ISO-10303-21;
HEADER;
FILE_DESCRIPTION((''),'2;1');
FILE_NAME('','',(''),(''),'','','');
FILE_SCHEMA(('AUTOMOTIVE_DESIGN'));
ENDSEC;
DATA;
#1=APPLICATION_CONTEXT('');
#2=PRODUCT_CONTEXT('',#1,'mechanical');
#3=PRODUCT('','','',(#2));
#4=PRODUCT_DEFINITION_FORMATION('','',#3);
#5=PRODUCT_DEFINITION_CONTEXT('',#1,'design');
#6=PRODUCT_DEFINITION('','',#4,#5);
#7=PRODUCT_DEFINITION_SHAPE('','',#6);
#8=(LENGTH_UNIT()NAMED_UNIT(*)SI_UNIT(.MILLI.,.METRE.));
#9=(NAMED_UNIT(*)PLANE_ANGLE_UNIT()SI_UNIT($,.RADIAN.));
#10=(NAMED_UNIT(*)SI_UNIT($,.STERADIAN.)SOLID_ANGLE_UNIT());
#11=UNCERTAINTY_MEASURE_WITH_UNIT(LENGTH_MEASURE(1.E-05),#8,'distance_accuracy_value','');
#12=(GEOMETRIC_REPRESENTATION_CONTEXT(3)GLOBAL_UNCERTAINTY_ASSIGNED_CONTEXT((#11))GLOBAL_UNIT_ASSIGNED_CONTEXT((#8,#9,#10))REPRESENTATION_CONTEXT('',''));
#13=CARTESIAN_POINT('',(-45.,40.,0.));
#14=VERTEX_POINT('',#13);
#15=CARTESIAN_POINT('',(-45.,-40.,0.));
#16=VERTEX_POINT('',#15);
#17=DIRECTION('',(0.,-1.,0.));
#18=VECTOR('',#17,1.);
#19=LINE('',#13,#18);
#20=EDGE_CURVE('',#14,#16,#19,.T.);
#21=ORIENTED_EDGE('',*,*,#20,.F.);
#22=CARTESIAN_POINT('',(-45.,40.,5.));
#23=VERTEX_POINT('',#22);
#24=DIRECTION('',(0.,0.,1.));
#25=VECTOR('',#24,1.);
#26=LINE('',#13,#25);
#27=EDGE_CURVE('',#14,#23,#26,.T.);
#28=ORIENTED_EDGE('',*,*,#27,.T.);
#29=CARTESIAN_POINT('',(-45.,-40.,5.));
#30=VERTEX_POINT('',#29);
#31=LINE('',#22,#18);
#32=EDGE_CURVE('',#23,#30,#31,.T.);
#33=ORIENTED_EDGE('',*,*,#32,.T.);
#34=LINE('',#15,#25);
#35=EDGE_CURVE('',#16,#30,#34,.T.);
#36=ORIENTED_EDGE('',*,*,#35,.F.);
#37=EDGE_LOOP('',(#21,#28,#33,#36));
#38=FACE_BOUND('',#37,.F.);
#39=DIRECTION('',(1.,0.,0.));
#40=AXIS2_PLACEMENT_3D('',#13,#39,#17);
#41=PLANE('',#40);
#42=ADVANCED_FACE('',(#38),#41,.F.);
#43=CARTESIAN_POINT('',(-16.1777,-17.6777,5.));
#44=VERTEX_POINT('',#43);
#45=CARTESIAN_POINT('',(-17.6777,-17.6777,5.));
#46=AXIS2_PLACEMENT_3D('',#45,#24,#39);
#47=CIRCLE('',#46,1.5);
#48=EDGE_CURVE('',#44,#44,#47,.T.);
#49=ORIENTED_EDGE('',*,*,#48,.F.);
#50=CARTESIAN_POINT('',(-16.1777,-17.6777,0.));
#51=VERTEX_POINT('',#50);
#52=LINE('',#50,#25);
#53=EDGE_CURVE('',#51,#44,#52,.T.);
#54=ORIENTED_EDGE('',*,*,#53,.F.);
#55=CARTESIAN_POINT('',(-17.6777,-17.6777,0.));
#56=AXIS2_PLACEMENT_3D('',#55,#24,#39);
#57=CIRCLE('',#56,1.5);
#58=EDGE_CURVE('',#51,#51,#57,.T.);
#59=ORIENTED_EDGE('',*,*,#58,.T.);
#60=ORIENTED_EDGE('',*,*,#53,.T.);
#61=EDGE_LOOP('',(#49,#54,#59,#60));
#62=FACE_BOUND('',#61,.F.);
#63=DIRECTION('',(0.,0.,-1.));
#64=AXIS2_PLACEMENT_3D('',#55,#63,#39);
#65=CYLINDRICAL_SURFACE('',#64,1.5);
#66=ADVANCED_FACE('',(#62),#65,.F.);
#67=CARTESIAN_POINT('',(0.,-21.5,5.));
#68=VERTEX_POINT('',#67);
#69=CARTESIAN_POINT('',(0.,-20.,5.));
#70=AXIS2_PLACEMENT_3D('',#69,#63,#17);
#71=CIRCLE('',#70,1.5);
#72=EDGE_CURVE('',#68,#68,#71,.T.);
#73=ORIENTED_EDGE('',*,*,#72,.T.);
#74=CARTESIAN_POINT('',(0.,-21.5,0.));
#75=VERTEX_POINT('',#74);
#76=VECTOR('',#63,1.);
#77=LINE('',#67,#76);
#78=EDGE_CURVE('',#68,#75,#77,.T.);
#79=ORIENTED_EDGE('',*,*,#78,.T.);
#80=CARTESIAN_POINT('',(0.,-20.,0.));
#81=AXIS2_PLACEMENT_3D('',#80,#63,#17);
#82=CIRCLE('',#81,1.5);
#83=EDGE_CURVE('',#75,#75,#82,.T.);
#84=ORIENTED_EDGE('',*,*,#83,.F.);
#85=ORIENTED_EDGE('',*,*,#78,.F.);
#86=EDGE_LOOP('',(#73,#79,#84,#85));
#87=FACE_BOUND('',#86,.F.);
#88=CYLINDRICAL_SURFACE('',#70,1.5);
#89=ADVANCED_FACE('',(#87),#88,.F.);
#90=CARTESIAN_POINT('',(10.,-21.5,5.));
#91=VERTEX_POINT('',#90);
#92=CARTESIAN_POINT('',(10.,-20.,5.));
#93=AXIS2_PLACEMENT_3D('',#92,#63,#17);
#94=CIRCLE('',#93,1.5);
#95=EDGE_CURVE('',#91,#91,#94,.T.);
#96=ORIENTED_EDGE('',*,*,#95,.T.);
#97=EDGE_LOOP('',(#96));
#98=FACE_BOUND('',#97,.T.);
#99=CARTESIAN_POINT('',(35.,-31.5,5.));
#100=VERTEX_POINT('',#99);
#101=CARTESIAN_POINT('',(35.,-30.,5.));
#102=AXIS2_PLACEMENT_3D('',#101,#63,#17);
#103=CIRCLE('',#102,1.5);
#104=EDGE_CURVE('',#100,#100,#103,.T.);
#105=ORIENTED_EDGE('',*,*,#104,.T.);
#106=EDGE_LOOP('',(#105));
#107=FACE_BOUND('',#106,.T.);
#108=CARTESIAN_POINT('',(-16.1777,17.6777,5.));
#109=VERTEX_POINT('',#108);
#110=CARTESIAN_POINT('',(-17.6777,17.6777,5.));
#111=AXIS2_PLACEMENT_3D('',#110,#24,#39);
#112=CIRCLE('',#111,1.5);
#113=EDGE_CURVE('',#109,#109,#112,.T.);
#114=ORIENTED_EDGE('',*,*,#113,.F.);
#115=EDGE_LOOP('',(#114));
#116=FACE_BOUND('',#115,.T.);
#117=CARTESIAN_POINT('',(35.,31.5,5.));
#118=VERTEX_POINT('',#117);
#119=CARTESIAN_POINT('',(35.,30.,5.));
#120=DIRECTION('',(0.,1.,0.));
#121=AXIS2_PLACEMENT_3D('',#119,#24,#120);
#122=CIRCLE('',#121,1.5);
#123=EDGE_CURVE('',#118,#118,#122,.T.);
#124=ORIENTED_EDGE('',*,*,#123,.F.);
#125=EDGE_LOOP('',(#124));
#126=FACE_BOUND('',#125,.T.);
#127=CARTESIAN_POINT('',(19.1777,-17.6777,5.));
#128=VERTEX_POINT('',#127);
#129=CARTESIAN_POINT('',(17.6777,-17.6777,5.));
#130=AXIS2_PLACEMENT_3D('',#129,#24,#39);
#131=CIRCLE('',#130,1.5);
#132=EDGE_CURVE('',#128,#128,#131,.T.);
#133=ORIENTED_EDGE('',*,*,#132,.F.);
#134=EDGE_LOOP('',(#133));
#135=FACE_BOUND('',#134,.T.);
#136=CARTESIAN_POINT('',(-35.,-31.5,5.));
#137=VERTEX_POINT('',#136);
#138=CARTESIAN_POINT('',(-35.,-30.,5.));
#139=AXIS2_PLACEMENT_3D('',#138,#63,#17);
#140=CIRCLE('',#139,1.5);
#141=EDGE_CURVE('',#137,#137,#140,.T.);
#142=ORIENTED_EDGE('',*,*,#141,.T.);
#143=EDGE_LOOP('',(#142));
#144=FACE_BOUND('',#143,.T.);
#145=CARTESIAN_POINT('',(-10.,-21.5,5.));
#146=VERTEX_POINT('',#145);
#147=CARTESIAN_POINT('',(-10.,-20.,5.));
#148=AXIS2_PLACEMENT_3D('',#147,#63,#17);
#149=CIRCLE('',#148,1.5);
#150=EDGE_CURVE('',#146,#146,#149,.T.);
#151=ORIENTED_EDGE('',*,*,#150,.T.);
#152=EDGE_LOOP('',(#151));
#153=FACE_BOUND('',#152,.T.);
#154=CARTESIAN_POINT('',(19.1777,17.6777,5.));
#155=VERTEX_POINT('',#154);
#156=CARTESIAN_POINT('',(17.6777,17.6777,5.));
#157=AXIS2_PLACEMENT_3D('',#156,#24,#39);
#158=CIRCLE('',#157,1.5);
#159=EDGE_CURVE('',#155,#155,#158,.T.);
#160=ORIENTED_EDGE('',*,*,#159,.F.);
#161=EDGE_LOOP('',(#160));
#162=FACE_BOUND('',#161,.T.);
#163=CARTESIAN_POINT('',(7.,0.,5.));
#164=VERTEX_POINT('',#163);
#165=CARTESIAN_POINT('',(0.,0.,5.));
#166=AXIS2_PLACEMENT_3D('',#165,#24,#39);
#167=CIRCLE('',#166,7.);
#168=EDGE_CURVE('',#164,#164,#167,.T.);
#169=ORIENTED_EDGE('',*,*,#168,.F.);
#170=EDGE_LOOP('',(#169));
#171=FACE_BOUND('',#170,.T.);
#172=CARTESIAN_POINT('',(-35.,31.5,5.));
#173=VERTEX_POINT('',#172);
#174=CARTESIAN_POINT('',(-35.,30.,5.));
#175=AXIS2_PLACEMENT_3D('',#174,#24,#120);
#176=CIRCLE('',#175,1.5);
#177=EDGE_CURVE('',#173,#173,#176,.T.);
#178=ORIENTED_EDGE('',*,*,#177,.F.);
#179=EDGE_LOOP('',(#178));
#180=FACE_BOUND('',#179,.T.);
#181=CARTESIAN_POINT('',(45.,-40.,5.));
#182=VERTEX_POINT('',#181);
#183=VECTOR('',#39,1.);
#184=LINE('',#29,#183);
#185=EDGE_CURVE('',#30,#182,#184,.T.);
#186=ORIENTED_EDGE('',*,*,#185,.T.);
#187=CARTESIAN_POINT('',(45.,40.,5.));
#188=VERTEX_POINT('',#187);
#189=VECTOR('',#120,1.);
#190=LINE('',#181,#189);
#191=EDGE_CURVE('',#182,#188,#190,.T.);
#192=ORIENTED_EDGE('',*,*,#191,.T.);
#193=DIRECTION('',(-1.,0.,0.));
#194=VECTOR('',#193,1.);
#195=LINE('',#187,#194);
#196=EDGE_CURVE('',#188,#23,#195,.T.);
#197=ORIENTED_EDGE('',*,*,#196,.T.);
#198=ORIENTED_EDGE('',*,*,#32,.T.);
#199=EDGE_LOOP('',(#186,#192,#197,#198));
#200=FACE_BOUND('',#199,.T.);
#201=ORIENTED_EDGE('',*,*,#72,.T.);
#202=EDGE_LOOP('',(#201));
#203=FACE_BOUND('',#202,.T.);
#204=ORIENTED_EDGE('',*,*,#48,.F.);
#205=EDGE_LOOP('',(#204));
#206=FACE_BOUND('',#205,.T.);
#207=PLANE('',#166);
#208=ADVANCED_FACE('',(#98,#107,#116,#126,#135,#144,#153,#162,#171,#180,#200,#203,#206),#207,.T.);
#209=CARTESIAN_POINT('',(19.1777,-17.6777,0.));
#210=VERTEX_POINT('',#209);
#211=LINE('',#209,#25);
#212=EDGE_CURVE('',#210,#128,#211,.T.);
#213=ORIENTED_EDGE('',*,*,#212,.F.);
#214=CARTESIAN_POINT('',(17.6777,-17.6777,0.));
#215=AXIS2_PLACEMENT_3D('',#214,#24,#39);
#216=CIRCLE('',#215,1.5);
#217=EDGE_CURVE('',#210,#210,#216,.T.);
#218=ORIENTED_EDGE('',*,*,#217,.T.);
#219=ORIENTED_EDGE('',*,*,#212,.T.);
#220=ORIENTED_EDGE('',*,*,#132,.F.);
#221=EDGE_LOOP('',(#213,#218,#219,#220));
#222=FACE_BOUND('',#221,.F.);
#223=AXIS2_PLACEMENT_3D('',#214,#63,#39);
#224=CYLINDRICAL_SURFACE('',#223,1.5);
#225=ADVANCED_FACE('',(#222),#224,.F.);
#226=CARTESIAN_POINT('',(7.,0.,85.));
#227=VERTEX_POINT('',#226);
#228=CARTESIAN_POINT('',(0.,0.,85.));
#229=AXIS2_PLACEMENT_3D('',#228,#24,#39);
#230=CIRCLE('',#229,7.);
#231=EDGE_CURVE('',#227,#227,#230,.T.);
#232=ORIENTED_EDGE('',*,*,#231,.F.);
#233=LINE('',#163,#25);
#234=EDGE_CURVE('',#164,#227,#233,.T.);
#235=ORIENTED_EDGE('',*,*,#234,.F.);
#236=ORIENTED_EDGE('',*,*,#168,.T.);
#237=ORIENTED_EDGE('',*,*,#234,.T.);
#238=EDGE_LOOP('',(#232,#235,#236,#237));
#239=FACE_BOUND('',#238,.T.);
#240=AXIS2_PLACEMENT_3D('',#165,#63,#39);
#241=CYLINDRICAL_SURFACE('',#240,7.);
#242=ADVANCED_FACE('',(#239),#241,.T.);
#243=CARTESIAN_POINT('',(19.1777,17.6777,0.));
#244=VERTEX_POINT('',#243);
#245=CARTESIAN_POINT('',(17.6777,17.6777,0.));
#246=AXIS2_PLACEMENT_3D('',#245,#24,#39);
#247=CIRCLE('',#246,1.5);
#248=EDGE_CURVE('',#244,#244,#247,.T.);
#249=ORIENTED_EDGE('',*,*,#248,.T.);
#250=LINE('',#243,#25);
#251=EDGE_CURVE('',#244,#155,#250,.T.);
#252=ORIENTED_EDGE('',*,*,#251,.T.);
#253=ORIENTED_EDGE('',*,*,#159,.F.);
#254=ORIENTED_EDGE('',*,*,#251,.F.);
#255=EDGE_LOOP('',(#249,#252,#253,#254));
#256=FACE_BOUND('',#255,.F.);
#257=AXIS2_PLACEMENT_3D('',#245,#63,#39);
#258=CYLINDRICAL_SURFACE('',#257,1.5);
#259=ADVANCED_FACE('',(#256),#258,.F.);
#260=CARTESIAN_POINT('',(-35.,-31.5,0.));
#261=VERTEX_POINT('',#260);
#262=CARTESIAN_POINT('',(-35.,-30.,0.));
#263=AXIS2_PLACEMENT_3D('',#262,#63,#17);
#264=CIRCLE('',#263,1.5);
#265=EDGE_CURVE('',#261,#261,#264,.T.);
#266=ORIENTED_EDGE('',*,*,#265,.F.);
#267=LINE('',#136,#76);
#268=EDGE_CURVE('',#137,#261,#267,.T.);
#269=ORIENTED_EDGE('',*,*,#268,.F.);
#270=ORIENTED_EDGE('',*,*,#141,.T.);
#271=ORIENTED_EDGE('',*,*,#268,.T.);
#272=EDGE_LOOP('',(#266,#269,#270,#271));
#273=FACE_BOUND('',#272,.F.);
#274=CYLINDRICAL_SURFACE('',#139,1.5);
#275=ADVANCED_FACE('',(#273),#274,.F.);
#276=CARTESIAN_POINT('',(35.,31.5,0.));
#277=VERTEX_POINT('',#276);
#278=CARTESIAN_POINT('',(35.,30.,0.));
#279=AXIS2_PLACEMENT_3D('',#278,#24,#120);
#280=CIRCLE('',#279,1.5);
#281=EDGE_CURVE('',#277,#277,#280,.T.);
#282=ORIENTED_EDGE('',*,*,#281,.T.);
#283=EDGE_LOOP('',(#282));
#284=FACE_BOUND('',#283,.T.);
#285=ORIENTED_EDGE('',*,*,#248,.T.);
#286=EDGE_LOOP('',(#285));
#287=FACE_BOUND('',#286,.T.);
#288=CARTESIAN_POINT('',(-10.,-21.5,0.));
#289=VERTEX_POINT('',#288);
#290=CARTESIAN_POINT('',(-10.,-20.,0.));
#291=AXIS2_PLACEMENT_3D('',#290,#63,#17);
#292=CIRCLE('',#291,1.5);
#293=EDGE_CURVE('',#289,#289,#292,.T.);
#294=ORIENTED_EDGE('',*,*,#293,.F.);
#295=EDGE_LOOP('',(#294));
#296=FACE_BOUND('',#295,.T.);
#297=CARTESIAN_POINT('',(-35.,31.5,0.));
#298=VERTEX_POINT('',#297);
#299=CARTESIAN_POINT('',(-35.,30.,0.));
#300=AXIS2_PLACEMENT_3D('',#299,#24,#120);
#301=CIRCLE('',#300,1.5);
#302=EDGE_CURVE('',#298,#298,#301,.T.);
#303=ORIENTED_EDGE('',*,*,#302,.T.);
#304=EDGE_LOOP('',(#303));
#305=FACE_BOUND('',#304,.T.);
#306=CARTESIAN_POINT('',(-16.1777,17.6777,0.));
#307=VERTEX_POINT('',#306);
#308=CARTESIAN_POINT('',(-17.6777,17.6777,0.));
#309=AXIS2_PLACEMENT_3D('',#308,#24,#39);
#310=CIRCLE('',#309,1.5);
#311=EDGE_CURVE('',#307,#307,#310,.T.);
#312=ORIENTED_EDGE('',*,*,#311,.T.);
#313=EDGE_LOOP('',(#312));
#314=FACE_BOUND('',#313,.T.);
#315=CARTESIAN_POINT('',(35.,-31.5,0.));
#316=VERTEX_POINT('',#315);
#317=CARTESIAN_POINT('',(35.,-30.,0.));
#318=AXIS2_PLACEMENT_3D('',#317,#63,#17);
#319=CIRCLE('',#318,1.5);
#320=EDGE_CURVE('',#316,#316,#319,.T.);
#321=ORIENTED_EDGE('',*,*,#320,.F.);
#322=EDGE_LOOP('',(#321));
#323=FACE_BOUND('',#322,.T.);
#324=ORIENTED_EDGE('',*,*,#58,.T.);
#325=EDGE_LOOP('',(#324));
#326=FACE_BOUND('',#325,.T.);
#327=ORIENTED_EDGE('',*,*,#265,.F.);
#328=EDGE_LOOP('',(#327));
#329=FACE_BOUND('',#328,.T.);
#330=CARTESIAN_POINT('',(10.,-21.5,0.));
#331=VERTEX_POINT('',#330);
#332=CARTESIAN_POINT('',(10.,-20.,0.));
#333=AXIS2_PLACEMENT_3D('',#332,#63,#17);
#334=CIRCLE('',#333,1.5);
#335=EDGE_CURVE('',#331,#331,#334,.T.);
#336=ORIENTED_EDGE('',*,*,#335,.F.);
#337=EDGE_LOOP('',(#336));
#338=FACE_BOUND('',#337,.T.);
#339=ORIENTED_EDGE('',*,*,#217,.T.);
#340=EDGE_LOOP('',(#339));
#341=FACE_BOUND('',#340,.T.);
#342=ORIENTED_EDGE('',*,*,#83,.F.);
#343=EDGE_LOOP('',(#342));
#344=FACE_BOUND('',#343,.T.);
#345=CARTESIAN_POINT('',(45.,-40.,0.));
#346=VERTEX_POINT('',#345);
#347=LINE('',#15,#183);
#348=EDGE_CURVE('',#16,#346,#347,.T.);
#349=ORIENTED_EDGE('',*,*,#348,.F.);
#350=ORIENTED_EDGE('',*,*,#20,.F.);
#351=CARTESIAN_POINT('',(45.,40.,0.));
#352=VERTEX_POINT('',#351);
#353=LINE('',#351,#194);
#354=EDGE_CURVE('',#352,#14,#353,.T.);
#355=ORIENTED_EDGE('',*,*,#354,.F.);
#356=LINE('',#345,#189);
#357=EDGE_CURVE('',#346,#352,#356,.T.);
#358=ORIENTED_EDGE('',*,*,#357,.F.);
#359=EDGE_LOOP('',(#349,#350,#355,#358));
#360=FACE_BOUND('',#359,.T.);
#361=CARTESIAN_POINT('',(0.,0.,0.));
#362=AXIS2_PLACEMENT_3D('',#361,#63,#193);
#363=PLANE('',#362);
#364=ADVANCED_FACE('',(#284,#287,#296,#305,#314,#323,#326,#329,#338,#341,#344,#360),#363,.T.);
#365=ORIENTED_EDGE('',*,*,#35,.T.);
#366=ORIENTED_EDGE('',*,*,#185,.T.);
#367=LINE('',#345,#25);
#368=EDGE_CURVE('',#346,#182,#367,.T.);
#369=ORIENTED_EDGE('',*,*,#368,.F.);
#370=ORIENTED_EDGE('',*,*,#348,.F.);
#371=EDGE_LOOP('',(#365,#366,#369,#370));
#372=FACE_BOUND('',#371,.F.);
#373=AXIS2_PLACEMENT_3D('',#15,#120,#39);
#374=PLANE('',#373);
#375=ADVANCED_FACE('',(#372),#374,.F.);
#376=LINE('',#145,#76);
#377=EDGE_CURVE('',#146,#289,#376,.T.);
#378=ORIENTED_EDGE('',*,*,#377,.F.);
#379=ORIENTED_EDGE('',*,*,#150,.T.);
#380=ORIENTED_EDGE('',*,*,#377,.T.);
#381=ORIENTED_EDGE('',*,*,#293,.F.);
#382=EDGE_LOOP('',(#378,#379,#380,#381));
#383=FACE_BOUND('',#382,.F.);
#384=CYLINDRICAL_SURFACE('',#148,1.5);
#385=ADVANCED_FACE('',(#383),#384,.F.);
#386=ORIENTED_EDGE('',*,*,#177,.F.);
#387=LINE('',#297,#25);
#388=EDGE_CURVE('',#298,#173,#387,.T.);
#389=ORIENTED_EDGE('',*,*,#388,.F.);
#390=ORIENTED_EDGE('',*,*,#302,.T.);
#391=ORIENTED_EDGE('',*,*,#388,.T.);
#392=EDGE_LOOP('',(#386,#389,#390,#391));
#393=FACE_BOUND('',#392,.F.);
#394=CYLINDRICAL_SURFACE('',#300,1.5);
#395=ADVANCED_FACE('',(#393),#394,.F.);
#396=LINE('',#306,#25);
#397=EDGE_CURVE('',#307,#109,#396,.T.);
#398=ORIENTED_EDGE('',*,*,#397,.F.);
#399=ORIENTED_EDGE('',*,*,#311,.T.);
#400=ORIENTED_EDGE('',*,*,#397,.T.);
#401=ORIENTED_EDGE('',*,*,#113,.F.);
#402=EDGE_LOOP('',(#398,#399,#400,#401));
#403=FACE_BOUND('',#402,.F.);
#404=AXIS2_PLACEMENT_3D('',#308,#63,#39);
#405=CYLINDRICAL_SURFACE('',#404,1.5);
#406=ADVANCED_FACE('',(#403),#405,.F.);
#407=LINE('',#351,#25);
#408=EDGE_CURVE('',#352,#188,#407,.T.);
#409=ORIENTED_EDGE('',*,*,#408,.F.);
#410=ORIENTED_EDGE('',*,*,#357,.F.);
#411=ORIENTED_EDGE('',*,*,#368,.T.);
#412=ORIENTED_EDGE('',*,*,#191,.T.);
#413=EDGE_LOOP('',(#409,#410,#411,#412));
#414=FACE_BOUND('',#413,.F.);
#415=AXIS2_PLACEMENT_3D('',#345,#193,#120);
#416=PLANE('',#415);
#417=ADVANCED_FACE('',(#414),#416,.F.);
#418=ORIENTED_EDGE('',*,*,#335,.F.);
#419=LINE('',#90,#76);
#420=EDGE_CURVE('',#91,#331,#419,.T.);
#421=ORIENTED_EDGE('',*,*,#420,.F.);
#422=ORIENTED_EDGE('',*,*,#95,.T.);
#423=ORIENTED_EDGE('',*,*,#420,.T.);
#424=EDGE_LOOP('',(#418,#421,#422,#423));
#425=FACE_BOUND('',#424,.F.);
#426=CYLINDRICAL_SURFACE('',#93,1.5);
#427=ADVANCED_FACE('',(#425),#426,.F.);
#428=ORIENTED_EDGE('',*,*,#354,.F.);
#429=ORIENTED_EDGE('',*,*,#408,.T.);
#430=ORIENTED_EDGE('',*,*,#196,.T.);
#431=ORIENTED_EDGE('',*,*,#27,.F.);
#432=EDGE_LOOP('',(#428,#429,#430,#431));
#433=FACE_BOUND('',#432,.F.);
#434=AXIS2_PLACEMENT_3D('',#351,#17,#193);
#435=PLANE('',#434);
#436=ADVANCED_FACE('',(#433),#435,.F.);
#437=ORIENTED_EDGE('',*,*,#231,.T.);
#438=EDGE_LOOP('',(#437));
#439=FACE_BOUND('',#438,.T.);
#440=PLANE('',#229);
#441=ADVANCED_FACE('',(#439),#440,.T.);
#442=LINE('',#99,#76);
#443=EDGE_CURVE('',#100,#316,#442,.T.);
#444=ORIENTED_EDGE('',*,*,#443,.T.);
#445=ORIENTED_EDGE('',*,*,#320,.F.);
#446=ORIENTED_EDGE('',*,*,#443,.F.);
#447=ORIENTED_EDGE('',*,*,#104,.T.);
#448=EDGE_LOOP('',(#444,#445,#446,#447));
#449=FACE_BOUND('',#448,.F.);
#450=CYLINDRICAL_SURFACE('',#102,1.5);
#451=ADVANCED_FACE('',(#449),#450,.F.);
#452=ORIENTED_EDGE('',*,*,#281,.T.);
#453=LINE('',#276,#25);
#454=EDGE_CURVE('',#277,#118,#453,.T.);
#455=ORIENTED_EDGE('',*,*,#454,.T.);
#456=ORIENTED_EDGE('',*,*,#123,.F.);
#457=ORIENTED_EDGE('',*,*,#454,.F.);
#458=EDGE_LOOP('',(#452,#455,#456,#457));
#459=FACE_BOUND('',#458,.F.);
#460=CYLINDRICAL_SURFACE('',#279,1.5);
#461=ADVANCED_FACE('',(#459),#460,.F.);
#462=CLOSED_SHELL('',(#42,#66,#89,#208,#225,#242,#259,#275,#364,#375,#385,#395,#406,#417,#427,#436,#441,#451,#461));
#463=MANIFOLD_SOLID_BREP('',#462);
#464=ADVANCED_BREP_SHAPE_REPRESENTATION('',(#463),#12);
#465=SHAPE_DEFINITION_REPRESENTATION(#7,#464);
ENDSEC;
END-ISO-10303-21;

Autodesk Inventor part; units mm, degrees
ref_plane "YZ Plane" through (0, 0, 0) normal (1, 0, 0) x (0, 1, 0)
ref_plane "XZ Plane" through (0, 0, 0) normal (0, 1, 0) x (-1, 0, 0)
ref_plane "XY Plane" through (0, 0, 0) normal (0, 0, 1) x (1, 0, 0)
sketch "スケッチ1" plane through (0, 0, 0) normal (0, 0, 1) x (1, 0, 0)
  circle A0 centre (-17.6777, 17.6777) radius 1.5
  circle A1 centre (17.6777, -17.6777) radius 1.5
  circle A2 centre (-17.6777, -17.6777) radius 1.5
  circle A3 centre (17.6777, 17.6777) radius 1.5
  line L0 (45, 40) -> (-45, 40)
  line L1 (-45, 40) -> (-45, -40)
  line L2 (-45, -40) -> (45, -40)
  line L3 (45, -40) -> (45, 40)
  line L4 (-5.5, 19.2289) -> (-5.5, 28)
  line L5 (-5.5, 28) -> (5.5, 28)
  line L6 (5.5, 28) -> (5.5, 19.2289)
  arc A4 (-5.5, 19.2289) -> (5.5, 19.2289) centre (0, 0) ccw
extrude "押し出し1" add sketch "スケッチ1" along normal blind 5
sketch "スケッチ2" plane through (0, 0, 0) normal (0, 0, -1) x (-1, 0, 0)
  line L0 (-5.5, 28) -> (5.5, 28) projected
  line L1 (5.5, 28) -> (5.5, 19.2289) projected
  arc A0 (-5.5, 19.2289) -> (5.5, 19.2289) centre (0, 0) ccw projected
  line L2 (-5.5, 19.2289) -> (-5.5, 28) projected
  circle A1 centre (0, 0) radius 20
  line L3 (-5.5, 19.2289) -> (-5.5, 28)
  line L4 (5.5, 28) -> (5.5, 19.2289)
extrude "押し出し2" add sketch "スケッチ2" against normal blind 5 contours L0 L1 A1 L2
sketch "スケッチ3" plane through (0, 0, 0) normal (0, 0, -1) x (-1, 0, 0)
  circle A0 centre (0, 0) radius 20 projected
  circle A1 centre (0, 0) radius 20
extrude "押し出し3" add sketch "スケッチ3" against normal blind 5
sketch "スケッチ4" plane through (0, 0, 5) normal (0, 0, 1) x (1, 0, 0)
  line L0 (-45, -40) -> (45, -40) projected
  line L1 (45, -40) -> (45, 40) projected
  line L2 (0, -40) -> (0, -20)
  line L3 (0, -20) -> (-10, -20)
  line L4 (-10, -20) -> (10, -20)
  line L5 (-45, -40) -> (-35, -40)
  line L6 (-35, -40) -> (-35, -30)
  line L7 (-35, -30) -> (-45, -30)
  line L8 (-45, -30) -> (-45, -40)
  line L9 (45, -40) -> (35, -40)
  line L10 (35, -40) -> (35, -30)
  line L11 (35, -30) -> (45, -30)
  line L12 (45, -30) -> (45, -40)
  point P0 (0, 0)
  dimension "d6" = 20
  dimension "d7" = 10
  dimension "d8" = 20
  dimension "d9" = 10
  dimension "d10" = 10
  dimension "d11" = 10
  dimension "d12" = 10
hole "穴1" at (-35, -30, 5) at (-10, -20, 5) at (0, -20, 5) at (10, -20, 5) at (35, -30, 5) direction (0, 0, -1) diameter 3 depth 8 tip angle 118
sketch "スケッチ5" plane through (0, 0, 5) normal (0, 0, 1) x (1, 0, 0)
  circle A0 centre (0, 0) radius 7
  dimension "d20" = 14
sketch "スケッチ6" plane through (0, 0, 5) normal (0, 0, 1) x (1, 0, 0)
  circle A0 centre (10, -20) radius 1.5 projected
  circle A1 centre (-10, -20) radius 1.5 projected
  circle A2 centre (-35, -30) radius 1.5 projected
  circle A3 centre (0, -20) radius 1.5 projected
  circle A4 centre (35, -30) radius 1.5 projected
  circle A5 centre (17.6777, 17.6777) radius 1.5 projected
  circle A6 centre (-17.6777, -17.6777) radius 1.5 projected
  circle A7 centre (17.6777, -17.6777) radius 1.5 projected
  circle A8 centre (-17.6777, 17.6777) radius 1.5 projected
  line L0 (45, 40) -> (-45, 40) projected
  line L1 (-45, 40) -> (-45, -40) projected
  line L2 (-45, -40) -> (45, -40) projected
  line L3 (45, -40) -> (45, 40) projected
  point P0 (0, 0)
extrude "押し出し4" add sketch "スケッチ5" along normal blind 80
sketch "スケッチ7" plane through (0, 0, 0) normal (0, 0, -1) x (-1, 0, 0)
  line L0 (-45, 40) -> (-35, 40)
  line L1 (-35, 40) -> (-35, 30)
  line L2 (-35, 30) -> (-45, 30)
  line L3 (-45, 30) -> (-45, 40)
  line L4 (45, 40) -> (35, 40)
  line L5 (35, 40) -> (35, 30)
  line L6 (35, 30) -> (45, 30)
  line L7 (45, 30) -> (45, 40)
  point P0 (0, 0)
  dimension "d24" = 10
  dimension "d25" = 10
  dimension "d26" = 10
  dimension "d27" = 10
hole "穴2" at (35, 30, 0) at (-35, 30, 0) direction (0, 0, 1) diameter 3 depth 8 tip angle 118
properties part number "知能ロボコンばね受け受け" material "ABS プラスチック"
